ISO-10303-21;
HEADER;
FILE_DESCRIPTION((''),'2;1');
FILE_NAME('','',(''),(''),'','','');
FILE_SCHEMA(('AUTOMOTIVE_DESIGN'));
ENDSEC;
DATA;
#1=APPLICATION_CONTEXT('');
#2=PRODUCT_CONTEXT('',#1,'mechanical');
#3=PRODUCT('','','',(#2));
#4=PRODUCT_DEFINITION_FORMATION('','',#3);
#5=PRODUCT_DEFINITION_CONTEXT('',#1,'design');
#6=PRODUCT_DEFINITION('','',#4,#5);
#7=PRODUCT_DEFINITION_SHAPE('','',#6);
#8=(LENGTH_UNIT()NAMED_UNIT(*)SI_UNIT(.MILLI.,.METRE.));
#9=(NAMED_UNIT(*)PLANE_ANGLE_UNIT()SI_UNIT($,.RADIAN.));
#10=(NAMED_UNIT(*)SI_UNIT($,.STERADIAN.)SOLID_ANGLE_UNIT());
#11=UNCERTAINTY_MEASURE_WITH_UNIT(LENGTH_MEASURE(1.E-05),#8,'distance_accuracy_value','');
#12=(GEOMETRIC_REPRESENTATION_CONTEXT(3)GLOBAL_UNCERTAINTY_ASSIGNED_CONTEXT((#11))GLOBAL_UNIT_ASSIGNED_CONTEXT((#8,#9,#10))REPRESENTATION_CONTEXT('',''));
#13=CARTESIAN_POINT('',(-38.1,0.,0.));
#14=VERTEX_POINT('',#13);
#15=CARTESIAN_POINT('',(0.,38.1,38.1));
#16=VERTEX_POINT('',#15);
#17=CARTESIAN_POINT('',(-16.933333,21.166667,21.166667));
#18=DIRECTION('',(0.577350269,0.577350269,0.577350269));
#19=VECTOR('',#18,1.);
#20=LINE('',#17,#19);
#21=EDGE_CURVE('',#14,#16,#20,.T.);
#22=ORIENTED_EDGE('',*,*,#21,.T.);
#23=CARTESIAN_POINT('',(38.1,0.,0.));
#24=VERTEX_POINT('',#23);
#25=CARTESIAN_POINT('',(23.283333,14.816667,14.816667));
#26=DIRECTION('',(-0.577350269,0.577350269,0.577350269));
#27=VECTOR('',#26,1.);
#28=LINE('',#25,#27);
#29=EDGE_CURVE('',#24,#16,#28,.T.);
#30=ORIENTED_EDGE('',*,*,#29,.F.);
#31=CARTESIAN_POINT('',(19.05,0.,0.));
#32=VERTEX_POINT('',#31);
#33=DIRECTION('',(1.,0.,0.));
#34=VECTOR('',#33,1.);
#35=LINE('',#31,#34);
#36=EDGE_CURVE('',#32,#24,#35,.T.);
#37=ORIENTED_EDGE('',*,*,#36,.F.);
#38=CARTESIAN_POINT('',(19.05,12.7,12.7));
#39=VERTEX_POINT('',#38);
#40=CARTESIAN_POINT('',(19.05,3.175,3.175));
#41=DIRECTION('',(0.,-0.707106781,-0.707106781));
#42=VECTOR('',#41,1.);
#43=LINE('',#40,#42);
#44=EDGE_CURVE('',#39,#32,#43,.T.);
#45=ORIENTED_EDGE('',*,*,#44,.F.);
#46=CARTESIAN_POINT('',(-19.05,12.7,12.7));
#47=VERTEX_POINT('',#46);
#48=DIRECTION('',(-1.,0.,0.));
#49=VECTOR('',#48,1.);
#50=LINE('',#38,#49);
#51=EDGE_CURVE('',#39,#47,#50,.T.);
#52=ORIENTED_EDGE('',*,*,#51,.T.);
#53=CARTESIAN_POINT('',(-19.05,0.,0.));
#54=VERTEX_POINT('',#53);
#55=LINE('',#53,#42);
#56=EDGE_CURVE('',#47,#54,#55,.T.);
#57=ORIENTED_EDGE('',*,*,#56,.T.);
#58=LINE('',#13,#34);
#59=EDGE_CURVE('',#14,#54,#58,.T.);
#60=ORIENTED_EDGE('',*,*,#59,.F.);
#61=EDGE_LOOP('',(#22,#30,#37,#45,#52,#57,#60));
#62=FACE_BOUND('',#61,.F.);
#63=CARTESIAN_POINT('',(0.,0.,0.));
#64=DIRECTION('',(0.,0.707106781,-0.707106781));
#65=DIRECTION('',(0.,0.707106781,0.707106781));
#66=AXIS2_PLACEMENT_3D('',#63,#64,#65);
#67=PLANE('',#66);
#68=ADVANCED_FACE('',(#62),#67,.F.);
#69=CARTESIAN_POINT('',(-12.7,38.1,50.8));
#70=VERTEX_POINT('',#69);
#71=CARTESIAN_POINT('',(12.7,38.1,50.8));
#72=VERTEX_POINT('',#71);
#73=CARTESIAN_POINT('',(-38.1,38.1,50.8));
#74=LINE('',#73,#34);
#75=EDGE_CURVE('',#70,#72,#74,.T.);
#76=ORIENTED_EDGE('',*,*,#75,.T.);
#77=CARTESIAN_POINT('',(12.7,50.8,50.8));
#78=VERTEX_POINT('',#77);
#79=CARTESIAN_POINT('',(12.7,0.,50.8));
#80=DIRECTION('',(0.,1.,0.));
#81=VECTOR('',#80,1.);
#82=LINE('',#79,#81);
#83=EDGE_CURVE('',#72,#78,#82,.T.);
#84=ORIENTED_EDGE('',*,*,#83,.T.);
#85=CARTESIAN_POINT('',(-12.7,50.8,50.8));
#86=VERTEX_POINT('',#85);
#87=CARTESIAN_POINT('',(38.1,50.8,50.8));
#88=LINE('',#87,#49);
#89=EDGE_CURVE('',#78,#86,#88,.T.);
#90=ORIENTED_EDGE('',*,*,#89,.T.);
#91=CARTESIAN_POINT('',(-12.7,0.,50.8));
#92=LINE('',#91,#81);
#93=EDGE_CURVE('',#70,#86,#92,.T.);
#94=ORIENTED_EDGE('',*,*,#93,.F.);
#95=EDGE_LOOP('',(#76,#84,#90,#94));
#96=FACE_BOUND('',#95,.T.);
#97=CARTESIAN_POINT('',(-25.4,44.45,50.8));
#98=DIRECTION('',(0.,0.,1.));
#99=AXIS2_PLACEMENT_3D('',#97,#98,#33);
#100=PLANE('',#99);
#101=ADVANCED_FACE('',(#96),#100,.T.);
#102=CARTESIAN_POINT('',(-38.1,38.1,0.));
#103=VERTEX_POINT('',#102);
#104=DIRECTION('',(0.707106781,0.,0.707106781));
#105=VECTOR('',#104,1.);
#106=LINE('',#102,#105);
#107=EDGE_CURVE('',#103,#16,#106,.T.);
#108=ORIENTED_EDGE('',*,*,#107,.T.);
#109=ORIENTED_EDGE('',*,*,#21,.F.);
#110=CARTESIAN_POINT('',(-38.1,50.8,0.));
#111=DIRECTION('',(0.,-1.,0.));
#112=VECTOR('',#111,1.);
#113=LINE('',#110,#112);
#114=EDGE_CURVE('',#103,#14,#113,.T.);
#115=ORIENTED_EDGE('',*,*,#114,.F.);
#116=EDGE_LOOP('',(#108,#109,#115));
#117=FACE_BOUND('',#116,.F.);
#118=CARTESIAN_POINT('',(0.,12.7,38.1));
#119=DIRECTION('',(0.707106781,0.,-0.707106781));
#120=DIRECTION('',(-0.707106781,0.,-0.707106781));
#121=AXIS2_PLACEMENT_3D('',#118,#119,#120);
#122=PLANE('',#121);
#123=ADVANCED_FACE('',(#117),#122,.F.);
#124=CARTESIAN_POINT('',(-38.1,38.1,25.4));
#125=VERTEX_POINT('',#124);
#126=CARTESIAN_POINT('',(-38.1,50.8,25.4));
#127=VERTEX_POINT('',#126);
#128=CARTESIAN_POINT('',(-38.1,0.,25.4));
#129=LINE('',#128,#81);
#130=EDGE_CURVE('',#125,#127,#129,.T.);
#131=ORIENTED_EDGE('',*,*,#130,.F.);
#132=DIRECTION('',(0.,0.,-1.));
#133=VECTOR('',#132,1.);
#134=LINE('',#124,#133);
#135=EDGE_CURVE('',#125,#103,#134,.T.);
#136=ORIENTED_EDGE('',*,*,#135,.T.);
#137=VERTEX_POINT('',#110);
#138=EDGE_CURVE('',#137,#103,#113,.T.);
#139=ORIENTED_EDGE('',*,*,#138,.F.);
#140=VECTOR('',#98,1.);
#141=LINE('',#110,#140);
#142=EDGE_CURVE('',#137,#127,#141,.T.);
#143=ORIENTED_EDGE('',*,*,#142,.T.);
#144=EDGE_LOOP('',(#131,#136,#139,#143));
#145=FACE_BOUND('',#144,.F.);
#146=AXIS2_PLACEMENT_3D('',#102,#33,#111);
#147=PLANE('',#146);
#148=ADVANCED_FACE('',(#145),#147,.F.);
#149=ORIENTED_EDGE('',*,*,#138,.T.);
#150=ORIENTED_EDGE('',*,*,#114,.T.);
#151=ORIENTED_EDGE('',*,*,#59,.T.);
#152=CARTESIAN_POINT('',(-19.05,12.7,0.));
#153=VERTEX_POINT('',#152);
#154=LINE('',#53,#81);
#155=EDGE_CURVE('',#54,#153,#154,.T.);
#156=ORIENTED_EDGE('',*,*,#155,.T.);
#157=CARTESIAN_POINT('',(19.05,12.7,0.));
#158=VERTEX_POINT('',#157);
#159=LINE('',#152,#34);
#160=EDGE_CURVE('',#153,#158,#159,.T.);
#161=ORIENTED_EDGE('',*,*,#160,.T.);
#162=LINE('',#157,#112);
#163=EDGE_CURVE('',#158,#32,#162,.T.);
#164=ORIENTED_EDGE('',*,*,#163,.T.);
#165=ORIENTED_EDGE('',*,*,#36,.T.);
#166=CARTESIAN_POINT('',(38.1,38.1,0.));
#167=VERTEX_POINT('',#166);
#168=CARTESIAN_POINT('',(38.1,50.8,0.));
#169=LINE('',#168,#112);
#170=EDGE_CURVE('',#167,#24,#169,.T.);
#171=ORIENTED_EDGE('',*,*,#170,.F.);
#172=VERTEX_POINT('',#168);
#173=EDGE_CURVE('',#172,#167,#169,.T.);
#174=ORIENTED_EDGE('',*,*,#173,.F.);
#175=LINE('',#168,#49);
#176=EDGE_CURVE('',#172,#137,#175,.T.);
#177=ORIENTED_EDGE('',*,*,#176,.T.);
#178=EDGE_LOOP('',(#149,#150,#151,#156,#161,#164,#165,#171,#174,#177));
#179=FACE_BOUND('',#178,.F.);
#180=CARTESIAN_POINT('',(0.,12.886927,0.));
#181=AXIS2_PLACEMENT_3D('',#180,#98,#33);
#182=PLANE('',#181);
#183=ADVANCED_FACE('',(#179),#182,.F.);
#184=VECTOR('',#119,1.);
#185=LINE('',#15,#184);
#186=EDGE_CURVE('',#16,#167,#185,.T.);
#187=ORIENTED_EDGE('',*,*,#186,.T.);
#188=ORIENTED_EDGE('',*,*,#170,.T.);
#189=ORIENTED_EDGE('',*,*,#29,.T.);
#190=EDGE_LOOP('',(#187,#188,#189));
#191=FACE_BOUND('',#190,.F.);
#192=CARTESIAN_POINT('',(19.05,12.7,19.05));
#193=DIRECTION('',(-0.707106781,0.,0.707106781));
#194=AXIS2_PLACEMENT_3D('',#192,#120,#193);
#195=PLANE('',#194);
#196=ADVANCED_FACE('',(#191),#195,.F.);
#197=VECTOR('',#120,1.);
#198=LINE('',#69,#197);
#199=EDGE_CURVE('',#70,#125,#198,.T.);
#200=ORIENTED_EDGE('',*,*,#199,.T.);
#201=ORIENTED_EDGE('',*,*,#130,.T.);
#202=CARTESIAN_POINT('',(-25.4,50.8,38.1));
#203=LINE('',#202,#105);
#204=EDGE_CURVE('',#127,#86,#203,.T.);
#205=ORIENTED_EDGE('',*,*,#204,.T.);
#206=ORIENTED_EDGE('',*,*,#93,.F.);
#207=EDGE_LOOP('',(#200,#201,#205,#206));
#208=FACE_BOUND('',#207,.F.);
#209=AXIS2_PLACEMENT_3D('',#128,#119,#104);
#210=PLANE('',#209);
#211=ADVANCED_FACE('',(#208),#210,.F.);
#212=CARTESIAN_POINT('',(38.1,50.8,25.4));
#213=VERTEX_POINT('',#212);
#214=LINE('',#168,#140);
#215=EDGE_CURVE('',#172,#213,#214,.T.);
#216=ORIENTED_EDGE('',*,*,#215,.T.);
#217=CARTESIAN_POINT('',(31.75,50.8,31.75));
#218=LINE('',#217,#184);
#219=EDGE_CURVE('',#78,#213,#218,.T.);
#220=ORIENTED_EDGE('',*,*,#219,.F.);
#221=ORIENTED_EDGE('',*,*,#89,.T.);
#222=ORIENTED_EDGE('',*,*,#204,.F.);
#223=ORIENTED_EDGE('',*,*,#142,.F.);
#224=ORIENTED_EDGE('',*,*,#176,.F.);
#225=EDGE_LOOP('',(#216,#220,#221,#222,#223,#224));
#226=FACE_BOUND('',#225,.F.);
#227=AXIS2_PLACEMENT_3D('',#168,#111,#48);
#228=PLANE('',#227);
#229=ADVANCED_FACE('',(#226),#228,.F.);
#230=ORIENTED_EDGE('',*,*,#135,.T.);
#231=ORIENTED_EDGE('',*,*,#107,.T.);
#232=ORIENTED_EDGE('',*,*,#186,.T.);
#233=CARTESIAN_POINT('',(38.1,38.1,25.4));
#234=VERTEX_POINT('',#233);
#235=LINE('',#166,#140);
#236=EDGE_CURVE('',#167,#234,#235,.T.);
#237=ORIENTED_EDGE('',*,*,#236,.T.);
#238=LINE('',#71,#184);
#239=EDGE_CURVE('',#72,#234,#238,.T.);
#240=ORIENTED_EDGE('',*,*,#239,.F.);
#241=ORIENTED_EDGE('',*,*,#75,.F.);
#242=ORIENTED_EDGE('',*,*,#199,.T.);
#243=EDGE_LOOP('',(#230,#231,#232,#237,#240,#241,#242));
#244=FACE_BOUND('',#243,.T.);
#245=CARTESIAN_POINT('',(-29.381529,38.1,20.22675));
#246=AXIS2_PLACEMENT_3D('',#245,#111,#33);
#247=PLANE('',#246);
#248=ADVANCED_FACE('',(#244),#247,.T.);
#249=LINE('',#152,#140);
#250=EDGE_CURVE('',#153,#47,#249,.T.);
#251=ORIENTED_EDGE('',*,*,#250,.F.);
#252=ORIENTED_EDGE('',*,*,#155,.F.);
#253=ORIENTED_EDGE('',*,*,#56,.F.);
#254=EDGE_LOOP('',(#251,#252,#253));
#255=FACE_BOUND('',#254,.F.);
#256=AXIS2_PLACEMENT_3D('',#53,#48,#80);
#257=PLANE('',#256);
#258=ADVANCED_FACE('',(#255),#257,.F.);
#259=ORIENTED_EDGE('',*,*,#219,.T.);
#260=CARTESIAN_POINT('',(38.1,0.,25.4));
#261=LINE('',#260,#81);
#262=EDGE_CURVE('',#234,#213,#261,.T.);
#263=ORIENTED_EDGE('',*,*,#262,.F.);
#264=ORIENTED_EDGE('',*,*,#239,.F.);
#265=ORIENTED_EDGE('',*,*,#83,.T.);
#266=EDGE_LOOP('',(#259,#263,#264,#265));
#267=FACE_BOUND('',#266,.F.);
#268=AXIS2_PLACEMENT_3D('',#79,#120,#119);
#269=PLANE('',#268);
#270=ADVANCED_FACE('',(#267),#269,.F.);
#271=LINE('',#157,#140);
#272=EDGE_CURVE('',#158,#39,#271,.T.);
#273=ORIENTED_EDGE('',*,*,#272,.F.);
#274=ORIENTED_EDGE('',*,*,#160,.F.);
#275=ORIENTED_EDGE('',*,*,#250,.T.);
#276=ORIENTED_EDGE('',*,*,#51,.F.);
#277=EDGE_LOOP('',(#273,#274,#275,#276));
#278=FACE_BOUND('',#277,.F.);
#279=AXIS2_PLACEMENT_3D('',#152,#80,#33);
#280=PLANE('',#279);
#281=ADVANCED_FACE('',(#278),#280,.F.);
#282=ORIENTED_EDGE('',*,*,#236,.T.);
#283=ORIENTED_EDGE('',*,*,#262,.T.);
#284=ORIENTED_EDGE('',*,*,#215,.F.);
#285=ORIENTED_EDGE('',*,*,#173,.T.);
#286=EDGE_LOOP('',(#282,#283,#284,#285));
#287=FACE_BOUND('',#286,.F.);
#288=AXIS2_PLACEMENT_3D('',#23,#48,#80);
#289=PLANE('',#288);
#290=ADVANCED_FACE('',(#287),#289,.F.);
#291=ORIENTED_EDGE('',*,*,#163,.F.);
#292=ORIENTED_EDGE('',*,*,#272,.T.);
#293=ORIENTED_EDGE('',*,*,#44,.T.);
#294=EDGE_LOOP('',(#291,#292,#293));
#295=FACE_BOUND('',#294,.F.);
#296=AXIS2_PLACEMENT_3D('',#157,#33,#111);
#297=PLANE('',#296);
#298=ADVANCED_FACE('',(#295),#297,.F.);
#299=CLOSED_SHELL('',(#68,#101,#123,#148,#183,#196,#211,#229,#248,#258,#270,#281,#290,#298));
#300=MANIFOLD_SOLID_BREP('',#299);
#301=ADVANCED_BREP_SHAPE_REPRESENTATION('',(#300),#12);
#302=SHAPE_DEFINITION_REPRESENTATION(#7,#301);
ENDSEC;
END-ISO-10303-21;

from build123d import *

# Parameters (mm, degrees)
F0_W          = 25.4
F0_H          = 12.7
F1_DEPTH      = 50.8
F2_DEPTH      = 38.1
F4_DEPTH      = 50.801
F5_DEPTH      = 38.1
F7_DEPTH      = 12.7
F9_DEPTH      = 38.101
F9_DEPTH_BACK = 38.101


with BuildPart() as f1:
    # F0 (on Top) → F1 (new body)
    with BuildSketch(Plane.XY):
        with Locations((-25.4, 44.45)):
            Rectangle(F0_W, F0_H)
        Polygon((12.7, 50.8), (-12.7, 50.8), (-12.7, 38.1), (0, 38.1), (12.7, 38.1), align=None)
        with Locations((25.4, 44.45)):
            Rectangle(F0_W, F0_H)
    extrude(amount=F1_DEPTH)

    # F0 (on Top) → F2 (join)
    with BuildSketch(Plane.XY):
        Polygon((0, 38.1), (-38.1, 0), (-19.05, 0), (-19.05, 12.7), (19.05, 12.7), (19.05, 0), (38.1, 0), align=None)
        Polygon((12.7, 38.1), (0, 38.1), (38.1, 0), (38.1, 38.1), align=None)
        Polygon((-12.7, 38.1), (-38.1, 38.1), (-38.1, 0), (0, 38.1), align=None)
    extrude(amount=F2_DEPTH)

    # F3 (on Front) → F4 (cut, through all)
    with BuildSketch(Plane.XZ):
        Polygon((-38.1, 38.1), (-38.1, 25.4), (-25.4, 38.1), align=None)
        Polygon((-38.1, 50.8), (-38.1, 38.1), (-25.4, 38.1), (-12.7, 50.8), align=None)
        Polygon((25.4, 38.1), (38.1, 25.4), (38.1, 38.1), align=None)
        Polygon((38.1, 50.8), (12.7, 50.8), (25.4, 38.1), (38.1, 38.1), align=None)
    extrude(amount=-F4_DEPTH, mode=Mode.SUBTRACT)

    # F3 (on Front) → F5 (cut, through all)
    with BuildSketch(Plane.XZ):
        Polygon((-38.1, 25.4), (-38.1, 0), (-19.05, 19.05), (-19.05, 38.1), (-25.4, 38.1), align=None)
        Polygon((-19.05, 38.1), (-19.05, 19.05), (0, 38.1), align=None)
        Polygon((19.05, 38.1), (0, 38.1), (19.05, 19.05), align=None)
        Polygon((19.05, 38.1), (19.05, 19.05), (38.1, 0), (38.1, 25.4), (25.4, 38.1), align=None)
        Polygon((25.4, 38.1), (38.1, 25.4), (38.1, 38.1), align=None)
    extrude(amount=-F5_DEPTH, mode=Mode.SUBTRACT)

    # F6 (on face) → F7 (join, through all)
    with BuildSketch(Plane.XZ.offset(-12.7)):
        Polygon((-19.05, 12.7), (19.05, 12.7), (19.05, 19.05), (0, 38.1), (-19.05, 19.05), align=None)
    extrude(amount=F7_DEPTH)

    # F8 (on Right) → F9 (cut, two sides)
    with BuildSketch(Plane.YZ) as f9_sk:
        Polygon((0, 0), (38.1, 38.1), (7e-10, 38.1), align=None)
    extrude(amount=-F9_DEPTH, mode=Mode.SUBTRACT)
    extrude(f9_sk.sketch, amount=F9_DEPTH_BACK, mode=Mode.SUBTRACT)


solid = f1.part
